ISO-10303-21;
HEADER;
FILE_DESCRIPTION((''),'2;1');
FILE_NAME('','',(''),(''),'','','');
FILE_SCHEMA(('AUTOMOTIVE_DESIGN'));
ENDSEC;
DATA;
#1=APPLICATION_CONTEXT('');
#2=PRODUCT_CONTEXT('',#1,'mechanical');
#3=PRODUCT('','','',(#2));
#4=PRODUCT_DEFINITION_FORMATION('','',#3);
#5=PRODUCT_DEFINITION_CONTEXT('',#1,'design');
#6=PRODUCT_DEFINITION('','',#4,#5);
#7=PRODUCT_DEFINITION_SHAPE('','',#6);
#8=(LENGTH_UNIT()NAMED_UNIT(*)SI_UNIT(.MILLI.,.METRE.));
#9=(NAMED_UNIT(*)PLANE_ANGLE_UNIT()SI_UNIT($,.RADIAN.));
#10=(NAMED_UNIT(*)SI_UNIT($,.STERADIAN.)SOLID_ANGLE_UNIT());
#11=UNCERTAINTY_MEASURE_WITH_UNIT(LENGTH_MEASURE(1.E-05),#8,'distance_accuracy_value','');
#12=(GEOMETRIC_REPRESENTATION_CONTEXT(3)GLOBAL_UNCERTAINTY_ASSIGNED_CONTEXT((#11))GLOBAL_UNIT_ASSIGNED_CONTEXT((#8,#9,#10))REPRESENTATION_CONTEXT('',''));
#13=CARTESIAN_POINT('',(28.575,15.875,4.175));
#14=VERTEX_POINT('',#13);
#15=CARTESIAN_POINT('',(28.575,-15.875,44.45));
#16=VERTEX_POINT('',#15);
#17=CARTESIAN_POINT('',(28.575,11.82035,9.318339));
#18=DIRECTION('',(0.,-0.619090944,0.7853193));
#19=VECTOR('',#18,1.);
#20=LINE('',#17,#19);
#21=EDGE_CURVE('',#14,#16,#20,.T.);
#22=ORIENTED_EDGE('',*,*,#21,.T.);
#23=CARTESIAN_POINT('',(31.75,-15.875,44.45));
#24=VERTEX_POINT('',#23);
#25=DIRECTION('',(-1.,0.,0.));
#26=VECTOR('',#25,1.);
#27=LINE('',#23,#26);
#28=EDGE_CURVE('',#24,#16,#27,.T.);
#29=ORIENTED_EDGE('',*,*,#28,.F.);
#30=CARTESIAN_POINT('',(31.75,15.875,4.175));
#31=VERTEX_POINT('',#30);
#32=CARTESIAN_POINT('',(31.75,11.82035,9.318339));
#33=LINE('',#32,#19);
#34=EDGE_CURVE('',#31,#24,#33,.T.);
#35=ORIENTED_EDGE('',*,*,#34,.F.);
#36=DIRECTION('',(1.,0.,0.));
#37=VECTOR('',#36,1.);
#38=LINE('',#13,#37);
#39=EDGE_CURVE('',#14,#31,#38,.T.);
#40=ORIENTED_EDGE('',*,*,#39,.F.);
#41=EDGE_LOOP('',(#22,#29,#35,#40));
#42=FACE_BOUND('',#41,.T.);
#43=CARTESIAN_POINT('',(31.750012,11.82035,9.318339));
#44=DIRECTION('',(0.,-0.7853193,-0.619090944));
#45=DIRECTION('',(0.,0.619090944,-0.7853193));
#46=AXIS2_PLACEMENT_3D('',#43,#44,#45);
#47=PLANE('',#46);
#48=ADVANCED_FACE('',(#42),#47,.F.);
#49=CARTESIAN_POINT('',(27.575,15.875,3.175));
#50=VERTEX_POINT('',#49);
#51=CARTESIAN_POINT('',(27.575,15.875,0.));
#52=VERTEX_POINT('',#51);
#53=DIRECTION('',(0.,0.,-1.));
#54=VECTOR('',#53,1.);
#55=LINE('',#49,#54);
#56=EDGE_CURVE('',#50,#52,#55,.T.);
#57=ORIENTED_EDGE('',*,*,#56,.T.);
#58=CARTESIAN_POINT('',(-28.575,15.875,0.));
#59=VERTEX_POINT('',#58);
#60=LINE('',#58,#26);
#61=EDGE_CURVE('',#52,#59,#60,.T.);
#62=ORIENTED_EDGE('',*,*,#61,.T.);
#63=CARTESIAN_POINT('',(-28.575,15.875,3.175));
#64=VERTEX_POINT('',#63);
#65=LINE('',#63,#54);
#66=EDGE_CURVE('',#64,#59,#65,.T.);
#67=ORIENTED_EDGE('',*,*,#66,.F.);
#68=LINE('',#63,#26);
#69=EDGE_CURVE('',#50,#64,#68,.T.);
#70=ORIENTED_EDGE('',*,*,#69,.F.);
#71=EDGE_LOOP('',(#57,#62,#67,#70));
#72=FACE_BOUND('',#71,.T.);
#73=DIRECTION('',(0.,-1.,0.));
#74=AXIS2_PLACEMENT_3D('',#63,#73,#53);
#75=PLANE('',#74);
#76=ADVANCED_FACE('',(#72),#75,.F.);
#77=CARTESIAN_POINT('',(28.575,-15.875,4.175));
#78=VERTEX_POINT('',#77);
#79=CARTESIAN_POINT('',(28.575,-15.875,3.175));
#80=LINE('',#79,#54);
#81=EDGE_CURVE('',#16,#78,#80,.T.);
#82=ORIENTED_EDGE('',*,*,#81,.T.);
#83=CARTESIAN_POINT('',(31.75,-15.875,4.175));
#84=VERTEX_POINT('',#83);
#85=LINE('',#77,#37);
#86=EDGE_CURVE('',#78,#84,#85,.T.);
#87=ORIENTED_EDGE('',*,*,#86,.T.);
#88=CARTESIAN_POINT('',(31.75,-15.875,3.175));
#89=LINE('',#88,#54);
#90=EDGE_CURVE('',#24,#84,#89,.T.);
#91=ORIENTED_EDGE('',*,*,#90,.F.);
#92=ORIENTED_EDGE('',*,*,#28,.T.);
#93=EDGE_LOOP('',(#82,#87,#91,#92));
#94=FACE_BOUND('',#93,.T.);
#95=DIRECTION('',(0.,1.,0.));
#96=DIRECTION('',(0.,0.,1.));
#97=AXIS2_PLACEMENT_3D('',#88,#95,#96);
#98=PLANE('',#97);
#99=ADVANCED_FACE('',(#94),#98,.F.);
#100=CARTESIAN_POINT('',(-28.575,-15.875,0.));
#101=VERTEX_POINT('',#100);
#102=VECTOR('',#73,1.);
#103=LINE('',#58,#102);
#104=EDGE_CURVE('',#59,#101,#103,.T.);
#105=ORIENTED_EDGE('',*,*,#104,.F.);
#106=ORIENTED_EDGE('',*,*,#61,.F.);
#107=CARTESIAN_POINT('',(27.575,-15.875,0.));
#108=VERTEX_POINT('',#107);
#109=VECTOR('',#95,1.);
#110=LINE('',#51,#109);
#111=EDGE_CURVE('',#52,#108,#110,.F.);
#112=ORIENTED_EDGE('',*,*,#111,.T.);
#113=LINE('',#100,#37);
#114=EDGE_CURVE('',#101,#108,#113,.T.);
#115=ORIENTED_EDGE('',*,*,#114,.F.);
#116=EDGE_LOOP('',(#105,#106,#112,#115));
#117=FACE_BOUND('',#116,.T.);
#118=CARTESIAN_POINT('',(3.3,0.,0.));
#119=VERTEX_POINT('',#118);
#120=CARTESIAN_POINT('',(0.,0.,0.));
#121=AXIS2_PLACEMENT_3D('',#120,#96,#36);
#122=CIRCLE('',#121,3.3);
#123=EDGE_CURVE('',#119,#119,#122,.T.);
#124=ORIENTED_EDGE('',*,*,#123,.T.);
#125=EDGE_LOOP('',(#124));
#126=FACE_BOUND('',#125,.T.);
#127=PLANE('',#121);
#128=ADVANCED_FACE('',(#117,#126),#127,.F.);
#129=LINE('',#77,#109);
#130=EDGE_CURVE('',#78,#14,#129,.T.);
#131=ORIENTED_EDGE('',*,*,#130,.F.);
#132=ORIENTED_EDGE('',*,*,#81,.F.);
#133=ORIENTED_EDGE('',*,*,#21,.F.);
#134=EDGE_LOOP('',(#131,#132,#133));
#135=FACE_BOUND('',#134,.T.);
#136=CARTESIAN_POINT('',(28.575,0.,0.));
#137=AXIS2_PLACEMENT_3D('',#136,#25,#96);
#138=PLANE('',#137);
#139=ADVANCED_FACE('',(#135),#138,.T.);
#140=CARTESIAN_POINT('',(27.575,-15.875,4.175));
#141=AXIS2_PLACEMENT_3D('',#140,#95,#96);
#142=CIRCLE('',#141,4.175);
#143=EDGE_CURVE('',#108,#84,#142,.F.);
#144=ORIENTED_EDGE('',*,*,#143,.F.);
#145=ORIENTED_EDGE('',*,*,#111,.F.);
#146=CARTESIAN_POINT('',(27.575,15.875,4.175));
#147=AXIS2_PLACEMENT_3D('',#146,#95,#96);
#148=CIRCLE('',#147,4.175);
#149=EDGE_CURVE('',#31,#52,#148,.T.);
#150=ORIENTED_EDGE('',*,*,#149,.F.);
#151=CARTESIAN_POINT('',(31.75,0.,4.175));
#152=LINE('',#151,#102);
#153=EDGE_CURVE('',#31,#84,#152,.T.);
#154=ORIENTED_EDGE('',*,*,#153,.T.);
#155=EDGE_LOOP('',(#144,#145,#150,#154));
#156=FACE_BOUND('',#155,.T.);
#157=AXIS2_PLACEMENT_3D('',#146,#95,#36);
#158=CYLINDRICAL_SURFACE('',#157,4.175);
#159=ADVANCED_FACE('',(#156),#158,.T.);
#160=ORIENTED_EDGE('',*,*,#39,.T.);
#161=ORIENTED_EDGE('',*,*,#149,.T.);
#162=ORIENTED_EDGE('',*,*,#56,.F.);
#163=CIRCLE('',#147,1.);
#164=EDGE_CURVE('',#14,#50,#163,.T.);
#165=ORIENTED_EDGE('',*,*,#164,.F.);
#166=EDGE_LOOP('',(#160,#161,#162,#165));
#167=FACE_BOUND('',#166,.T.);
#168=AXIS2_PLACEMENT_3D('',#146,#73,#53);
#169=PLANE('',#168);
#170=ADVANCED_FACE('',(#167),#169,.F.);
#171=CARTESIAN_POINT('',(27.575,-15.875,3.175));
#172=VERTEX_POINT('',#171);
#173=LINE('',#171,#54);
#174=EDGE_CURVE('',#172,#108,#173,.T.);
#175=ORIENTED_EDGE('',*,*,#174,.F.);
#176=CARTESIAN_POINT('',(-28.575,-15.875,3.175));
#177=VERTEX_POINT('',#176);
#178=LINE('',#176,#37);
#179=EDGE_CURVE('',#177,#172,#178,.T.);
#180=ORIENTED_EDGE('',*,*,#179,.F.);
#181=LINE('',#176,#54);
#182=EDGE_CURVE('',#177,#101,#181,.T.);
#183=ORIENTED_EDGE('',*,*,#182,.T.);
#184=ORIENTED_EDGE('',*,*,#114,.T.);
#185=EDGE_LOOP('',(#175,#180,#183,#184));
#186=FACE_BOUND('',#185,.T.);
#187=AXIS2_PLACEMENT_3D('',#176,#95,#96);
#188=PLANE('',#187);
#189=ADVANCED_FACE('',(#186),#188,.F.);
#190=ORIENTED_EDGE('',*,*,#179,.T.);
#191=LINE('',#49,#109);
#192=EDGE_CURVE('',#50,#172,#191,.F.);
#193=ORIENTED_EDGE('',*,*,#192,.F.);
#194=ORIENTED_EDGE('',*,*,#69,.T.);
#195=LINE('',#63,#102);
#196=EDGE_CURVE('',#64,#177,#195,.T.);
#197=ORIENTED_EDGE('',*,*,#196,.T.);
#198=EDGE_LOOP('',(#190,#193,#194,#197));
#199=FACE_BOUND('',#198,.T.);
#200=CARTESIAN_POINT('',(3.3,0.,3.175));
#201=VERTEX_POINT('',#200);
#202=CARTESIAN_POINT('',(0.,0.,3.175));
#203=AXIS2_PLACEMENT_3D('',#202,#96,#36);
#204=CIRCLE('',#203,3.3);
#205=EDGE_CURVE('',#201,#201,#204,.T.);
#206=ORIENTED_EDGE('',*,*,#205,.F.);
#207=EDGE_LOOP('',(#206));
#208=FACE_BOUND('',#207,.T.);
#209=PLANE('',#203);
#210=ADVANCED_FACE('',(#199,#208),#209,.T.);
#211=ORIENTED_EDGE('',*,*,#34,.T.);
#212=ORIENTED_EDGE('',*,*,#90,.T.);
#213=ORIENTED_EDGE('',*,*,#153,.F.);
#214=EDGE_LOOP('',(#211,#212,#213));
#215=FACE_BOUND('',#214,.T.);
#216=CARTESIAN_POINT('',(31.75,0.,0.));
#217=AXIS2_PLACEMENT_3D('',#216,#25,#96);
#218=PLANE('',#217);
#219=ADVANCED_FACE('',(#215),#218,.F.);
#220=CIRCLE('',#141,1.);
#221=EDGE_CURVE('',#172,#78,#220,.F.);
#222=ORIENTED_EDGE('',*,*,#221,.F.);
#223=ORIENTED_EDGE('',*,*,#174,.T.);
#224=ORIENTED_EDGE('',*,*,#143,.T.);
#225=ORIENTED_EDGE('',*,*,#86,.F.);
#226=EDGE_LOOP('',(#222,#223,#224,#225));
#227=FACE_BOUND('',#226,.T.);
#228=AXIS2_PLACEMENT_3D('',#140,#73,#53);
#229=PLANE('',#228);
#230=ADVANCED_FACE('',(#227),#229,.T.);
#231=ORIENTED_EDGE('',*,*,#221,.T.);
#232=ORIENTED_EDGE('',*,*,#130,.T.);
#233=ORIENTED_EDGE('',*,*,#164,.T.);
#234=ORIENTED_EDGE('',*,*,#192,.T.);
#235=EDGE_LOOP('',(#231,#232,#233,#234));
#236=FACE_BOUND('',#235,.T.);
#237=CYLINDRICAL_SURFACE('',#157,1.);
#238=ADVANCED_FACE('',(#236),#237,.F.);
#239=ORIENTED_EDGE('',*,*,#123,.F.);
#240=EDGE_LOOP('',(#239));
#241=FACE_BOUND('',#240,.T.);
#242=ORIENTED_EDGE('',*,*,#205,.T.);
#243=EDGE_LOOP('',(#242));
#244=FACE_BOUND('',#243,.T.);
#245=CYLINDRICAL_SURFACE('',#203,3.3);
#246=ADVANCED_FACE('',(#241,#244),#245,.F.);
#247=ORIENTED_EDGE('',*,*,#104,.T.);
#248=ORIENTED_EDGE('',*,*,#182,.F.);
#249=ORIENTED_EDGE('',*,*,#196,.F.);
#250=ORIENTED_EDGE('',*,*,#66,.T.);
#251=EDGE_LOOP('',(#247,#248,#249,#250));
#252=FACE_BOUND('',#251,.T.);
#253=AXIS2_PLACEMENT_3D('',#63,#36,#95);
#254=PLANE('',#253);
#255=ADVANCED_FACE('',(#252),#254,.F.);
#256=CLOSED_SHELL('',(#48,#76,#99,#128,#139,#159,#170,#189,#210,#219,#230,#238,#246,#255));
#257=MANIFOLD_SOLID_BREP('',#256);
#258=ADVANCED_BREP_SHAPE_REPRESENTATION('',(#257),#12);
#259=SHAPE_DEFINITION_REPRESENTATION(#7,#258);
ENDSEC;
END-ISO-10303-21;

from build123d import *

# Parameters (mm, degrees)
SKETCH2_W                    = 57.15
SKETCH2_H                    = 31.75
BASE_FLANGE1_DEPTH           = 3.175
EDGE_FLANGE1_STRIP_W         = 14.7
EDGE_FLANGE1_STRIP_H         = 3.175
EDGE_FLANGE1_STRIP_CUT_DEPTH = 31.75
EDGE_FLANGE1_DEPTH           = 31.75
CUT_EXTRUDE1_DEPTH           = 77.59584682
CUT_EXTRUDE1_DEPTH_BACK      = 3.175
M6_CLEARANCE_HOLE1_D         = 6.6


# Sheet-metal steps are written as plain solids
with BuildPart() as part:
    # Sketch2 → Base-Flange1 (new body)
    with BuildSketch(Plane.XY):
        Rectangle(SKETCH2_W, SKETCH2_H)
    extrude(amount=BASE_FLANGE1_DEPTH)

    # Edge-Flange1 strip (across the edge) → Edge-Flange1 strip cut (cut)
    with BuildSketch(Plane(origin=(28.575, -15.875, 3.175), x_dir=(-1, 0, 0), z_dir=(0, 1, 0))):
        with Locations((-6.35, -1.5875)):
            Rectangle(EDGE_FLANGE1_STRIP_W, EDGE_FLANGE1_STRIP_H)
    extrude(amount=EDGE_FLANGE1_STRIP_CUT_DEPTH, mode=Mode.SUBTRACT)

    # Edge-Flange1 section (across the edge) → Edge-Flange1 (add)
    with BuildSketch(Plane(origin=(28.575, -15.875, 3.175), x_dir=(-1, 0, 0), z_dir=(0, 1, 0))):
        with BuildLine():
            Line((-3.175, 1), (-3.175, 41.275))
            Line((-3.175, 41.275), (0, 41.275))
            Line((0, 41.275), (0, 1))
            ThreePointArc((0, 1), (0.292893219, 0.292893219), (1, 0))
            Line((1, 0), (1, -3.175))
            ThreePointArc((1, -3.175), (-1.952170811, -1.952170811), (-3.175, 1))
        make_face()
    extrude(amount=EDGE_FLANGE1_DEPTH)

    # Sketch10 → Cut-Extrude1 (cut, two sides: drawn at the far end of the back side and taken through both)
    with BuildSketch(Plane(origin=(31.75, 0, 0), x_dir=(0, 0, -1), z_dir=(1, 0, 0)).offset(-CUT_EXTRUDE1_DEPTH_BACK)):
        Polygon((-4.175, 15.875), (-44.45, -15.875), (-44.45, 15.875), align=None)
    extrude(amount=CUT_EXTRUDE1_DEPTH + CUT_EXTRUDE1_DEPTH_BACK, mode=Mode.SUBTRACT)

    # M6 Clearance Hole1 (through all)
    with Locations(Plane.XY.offset(3.175)):
        with Locations((0, 0)):
            Hole(M6_CLEARANCE_HOLE1_D / 2)


solid = part.part
